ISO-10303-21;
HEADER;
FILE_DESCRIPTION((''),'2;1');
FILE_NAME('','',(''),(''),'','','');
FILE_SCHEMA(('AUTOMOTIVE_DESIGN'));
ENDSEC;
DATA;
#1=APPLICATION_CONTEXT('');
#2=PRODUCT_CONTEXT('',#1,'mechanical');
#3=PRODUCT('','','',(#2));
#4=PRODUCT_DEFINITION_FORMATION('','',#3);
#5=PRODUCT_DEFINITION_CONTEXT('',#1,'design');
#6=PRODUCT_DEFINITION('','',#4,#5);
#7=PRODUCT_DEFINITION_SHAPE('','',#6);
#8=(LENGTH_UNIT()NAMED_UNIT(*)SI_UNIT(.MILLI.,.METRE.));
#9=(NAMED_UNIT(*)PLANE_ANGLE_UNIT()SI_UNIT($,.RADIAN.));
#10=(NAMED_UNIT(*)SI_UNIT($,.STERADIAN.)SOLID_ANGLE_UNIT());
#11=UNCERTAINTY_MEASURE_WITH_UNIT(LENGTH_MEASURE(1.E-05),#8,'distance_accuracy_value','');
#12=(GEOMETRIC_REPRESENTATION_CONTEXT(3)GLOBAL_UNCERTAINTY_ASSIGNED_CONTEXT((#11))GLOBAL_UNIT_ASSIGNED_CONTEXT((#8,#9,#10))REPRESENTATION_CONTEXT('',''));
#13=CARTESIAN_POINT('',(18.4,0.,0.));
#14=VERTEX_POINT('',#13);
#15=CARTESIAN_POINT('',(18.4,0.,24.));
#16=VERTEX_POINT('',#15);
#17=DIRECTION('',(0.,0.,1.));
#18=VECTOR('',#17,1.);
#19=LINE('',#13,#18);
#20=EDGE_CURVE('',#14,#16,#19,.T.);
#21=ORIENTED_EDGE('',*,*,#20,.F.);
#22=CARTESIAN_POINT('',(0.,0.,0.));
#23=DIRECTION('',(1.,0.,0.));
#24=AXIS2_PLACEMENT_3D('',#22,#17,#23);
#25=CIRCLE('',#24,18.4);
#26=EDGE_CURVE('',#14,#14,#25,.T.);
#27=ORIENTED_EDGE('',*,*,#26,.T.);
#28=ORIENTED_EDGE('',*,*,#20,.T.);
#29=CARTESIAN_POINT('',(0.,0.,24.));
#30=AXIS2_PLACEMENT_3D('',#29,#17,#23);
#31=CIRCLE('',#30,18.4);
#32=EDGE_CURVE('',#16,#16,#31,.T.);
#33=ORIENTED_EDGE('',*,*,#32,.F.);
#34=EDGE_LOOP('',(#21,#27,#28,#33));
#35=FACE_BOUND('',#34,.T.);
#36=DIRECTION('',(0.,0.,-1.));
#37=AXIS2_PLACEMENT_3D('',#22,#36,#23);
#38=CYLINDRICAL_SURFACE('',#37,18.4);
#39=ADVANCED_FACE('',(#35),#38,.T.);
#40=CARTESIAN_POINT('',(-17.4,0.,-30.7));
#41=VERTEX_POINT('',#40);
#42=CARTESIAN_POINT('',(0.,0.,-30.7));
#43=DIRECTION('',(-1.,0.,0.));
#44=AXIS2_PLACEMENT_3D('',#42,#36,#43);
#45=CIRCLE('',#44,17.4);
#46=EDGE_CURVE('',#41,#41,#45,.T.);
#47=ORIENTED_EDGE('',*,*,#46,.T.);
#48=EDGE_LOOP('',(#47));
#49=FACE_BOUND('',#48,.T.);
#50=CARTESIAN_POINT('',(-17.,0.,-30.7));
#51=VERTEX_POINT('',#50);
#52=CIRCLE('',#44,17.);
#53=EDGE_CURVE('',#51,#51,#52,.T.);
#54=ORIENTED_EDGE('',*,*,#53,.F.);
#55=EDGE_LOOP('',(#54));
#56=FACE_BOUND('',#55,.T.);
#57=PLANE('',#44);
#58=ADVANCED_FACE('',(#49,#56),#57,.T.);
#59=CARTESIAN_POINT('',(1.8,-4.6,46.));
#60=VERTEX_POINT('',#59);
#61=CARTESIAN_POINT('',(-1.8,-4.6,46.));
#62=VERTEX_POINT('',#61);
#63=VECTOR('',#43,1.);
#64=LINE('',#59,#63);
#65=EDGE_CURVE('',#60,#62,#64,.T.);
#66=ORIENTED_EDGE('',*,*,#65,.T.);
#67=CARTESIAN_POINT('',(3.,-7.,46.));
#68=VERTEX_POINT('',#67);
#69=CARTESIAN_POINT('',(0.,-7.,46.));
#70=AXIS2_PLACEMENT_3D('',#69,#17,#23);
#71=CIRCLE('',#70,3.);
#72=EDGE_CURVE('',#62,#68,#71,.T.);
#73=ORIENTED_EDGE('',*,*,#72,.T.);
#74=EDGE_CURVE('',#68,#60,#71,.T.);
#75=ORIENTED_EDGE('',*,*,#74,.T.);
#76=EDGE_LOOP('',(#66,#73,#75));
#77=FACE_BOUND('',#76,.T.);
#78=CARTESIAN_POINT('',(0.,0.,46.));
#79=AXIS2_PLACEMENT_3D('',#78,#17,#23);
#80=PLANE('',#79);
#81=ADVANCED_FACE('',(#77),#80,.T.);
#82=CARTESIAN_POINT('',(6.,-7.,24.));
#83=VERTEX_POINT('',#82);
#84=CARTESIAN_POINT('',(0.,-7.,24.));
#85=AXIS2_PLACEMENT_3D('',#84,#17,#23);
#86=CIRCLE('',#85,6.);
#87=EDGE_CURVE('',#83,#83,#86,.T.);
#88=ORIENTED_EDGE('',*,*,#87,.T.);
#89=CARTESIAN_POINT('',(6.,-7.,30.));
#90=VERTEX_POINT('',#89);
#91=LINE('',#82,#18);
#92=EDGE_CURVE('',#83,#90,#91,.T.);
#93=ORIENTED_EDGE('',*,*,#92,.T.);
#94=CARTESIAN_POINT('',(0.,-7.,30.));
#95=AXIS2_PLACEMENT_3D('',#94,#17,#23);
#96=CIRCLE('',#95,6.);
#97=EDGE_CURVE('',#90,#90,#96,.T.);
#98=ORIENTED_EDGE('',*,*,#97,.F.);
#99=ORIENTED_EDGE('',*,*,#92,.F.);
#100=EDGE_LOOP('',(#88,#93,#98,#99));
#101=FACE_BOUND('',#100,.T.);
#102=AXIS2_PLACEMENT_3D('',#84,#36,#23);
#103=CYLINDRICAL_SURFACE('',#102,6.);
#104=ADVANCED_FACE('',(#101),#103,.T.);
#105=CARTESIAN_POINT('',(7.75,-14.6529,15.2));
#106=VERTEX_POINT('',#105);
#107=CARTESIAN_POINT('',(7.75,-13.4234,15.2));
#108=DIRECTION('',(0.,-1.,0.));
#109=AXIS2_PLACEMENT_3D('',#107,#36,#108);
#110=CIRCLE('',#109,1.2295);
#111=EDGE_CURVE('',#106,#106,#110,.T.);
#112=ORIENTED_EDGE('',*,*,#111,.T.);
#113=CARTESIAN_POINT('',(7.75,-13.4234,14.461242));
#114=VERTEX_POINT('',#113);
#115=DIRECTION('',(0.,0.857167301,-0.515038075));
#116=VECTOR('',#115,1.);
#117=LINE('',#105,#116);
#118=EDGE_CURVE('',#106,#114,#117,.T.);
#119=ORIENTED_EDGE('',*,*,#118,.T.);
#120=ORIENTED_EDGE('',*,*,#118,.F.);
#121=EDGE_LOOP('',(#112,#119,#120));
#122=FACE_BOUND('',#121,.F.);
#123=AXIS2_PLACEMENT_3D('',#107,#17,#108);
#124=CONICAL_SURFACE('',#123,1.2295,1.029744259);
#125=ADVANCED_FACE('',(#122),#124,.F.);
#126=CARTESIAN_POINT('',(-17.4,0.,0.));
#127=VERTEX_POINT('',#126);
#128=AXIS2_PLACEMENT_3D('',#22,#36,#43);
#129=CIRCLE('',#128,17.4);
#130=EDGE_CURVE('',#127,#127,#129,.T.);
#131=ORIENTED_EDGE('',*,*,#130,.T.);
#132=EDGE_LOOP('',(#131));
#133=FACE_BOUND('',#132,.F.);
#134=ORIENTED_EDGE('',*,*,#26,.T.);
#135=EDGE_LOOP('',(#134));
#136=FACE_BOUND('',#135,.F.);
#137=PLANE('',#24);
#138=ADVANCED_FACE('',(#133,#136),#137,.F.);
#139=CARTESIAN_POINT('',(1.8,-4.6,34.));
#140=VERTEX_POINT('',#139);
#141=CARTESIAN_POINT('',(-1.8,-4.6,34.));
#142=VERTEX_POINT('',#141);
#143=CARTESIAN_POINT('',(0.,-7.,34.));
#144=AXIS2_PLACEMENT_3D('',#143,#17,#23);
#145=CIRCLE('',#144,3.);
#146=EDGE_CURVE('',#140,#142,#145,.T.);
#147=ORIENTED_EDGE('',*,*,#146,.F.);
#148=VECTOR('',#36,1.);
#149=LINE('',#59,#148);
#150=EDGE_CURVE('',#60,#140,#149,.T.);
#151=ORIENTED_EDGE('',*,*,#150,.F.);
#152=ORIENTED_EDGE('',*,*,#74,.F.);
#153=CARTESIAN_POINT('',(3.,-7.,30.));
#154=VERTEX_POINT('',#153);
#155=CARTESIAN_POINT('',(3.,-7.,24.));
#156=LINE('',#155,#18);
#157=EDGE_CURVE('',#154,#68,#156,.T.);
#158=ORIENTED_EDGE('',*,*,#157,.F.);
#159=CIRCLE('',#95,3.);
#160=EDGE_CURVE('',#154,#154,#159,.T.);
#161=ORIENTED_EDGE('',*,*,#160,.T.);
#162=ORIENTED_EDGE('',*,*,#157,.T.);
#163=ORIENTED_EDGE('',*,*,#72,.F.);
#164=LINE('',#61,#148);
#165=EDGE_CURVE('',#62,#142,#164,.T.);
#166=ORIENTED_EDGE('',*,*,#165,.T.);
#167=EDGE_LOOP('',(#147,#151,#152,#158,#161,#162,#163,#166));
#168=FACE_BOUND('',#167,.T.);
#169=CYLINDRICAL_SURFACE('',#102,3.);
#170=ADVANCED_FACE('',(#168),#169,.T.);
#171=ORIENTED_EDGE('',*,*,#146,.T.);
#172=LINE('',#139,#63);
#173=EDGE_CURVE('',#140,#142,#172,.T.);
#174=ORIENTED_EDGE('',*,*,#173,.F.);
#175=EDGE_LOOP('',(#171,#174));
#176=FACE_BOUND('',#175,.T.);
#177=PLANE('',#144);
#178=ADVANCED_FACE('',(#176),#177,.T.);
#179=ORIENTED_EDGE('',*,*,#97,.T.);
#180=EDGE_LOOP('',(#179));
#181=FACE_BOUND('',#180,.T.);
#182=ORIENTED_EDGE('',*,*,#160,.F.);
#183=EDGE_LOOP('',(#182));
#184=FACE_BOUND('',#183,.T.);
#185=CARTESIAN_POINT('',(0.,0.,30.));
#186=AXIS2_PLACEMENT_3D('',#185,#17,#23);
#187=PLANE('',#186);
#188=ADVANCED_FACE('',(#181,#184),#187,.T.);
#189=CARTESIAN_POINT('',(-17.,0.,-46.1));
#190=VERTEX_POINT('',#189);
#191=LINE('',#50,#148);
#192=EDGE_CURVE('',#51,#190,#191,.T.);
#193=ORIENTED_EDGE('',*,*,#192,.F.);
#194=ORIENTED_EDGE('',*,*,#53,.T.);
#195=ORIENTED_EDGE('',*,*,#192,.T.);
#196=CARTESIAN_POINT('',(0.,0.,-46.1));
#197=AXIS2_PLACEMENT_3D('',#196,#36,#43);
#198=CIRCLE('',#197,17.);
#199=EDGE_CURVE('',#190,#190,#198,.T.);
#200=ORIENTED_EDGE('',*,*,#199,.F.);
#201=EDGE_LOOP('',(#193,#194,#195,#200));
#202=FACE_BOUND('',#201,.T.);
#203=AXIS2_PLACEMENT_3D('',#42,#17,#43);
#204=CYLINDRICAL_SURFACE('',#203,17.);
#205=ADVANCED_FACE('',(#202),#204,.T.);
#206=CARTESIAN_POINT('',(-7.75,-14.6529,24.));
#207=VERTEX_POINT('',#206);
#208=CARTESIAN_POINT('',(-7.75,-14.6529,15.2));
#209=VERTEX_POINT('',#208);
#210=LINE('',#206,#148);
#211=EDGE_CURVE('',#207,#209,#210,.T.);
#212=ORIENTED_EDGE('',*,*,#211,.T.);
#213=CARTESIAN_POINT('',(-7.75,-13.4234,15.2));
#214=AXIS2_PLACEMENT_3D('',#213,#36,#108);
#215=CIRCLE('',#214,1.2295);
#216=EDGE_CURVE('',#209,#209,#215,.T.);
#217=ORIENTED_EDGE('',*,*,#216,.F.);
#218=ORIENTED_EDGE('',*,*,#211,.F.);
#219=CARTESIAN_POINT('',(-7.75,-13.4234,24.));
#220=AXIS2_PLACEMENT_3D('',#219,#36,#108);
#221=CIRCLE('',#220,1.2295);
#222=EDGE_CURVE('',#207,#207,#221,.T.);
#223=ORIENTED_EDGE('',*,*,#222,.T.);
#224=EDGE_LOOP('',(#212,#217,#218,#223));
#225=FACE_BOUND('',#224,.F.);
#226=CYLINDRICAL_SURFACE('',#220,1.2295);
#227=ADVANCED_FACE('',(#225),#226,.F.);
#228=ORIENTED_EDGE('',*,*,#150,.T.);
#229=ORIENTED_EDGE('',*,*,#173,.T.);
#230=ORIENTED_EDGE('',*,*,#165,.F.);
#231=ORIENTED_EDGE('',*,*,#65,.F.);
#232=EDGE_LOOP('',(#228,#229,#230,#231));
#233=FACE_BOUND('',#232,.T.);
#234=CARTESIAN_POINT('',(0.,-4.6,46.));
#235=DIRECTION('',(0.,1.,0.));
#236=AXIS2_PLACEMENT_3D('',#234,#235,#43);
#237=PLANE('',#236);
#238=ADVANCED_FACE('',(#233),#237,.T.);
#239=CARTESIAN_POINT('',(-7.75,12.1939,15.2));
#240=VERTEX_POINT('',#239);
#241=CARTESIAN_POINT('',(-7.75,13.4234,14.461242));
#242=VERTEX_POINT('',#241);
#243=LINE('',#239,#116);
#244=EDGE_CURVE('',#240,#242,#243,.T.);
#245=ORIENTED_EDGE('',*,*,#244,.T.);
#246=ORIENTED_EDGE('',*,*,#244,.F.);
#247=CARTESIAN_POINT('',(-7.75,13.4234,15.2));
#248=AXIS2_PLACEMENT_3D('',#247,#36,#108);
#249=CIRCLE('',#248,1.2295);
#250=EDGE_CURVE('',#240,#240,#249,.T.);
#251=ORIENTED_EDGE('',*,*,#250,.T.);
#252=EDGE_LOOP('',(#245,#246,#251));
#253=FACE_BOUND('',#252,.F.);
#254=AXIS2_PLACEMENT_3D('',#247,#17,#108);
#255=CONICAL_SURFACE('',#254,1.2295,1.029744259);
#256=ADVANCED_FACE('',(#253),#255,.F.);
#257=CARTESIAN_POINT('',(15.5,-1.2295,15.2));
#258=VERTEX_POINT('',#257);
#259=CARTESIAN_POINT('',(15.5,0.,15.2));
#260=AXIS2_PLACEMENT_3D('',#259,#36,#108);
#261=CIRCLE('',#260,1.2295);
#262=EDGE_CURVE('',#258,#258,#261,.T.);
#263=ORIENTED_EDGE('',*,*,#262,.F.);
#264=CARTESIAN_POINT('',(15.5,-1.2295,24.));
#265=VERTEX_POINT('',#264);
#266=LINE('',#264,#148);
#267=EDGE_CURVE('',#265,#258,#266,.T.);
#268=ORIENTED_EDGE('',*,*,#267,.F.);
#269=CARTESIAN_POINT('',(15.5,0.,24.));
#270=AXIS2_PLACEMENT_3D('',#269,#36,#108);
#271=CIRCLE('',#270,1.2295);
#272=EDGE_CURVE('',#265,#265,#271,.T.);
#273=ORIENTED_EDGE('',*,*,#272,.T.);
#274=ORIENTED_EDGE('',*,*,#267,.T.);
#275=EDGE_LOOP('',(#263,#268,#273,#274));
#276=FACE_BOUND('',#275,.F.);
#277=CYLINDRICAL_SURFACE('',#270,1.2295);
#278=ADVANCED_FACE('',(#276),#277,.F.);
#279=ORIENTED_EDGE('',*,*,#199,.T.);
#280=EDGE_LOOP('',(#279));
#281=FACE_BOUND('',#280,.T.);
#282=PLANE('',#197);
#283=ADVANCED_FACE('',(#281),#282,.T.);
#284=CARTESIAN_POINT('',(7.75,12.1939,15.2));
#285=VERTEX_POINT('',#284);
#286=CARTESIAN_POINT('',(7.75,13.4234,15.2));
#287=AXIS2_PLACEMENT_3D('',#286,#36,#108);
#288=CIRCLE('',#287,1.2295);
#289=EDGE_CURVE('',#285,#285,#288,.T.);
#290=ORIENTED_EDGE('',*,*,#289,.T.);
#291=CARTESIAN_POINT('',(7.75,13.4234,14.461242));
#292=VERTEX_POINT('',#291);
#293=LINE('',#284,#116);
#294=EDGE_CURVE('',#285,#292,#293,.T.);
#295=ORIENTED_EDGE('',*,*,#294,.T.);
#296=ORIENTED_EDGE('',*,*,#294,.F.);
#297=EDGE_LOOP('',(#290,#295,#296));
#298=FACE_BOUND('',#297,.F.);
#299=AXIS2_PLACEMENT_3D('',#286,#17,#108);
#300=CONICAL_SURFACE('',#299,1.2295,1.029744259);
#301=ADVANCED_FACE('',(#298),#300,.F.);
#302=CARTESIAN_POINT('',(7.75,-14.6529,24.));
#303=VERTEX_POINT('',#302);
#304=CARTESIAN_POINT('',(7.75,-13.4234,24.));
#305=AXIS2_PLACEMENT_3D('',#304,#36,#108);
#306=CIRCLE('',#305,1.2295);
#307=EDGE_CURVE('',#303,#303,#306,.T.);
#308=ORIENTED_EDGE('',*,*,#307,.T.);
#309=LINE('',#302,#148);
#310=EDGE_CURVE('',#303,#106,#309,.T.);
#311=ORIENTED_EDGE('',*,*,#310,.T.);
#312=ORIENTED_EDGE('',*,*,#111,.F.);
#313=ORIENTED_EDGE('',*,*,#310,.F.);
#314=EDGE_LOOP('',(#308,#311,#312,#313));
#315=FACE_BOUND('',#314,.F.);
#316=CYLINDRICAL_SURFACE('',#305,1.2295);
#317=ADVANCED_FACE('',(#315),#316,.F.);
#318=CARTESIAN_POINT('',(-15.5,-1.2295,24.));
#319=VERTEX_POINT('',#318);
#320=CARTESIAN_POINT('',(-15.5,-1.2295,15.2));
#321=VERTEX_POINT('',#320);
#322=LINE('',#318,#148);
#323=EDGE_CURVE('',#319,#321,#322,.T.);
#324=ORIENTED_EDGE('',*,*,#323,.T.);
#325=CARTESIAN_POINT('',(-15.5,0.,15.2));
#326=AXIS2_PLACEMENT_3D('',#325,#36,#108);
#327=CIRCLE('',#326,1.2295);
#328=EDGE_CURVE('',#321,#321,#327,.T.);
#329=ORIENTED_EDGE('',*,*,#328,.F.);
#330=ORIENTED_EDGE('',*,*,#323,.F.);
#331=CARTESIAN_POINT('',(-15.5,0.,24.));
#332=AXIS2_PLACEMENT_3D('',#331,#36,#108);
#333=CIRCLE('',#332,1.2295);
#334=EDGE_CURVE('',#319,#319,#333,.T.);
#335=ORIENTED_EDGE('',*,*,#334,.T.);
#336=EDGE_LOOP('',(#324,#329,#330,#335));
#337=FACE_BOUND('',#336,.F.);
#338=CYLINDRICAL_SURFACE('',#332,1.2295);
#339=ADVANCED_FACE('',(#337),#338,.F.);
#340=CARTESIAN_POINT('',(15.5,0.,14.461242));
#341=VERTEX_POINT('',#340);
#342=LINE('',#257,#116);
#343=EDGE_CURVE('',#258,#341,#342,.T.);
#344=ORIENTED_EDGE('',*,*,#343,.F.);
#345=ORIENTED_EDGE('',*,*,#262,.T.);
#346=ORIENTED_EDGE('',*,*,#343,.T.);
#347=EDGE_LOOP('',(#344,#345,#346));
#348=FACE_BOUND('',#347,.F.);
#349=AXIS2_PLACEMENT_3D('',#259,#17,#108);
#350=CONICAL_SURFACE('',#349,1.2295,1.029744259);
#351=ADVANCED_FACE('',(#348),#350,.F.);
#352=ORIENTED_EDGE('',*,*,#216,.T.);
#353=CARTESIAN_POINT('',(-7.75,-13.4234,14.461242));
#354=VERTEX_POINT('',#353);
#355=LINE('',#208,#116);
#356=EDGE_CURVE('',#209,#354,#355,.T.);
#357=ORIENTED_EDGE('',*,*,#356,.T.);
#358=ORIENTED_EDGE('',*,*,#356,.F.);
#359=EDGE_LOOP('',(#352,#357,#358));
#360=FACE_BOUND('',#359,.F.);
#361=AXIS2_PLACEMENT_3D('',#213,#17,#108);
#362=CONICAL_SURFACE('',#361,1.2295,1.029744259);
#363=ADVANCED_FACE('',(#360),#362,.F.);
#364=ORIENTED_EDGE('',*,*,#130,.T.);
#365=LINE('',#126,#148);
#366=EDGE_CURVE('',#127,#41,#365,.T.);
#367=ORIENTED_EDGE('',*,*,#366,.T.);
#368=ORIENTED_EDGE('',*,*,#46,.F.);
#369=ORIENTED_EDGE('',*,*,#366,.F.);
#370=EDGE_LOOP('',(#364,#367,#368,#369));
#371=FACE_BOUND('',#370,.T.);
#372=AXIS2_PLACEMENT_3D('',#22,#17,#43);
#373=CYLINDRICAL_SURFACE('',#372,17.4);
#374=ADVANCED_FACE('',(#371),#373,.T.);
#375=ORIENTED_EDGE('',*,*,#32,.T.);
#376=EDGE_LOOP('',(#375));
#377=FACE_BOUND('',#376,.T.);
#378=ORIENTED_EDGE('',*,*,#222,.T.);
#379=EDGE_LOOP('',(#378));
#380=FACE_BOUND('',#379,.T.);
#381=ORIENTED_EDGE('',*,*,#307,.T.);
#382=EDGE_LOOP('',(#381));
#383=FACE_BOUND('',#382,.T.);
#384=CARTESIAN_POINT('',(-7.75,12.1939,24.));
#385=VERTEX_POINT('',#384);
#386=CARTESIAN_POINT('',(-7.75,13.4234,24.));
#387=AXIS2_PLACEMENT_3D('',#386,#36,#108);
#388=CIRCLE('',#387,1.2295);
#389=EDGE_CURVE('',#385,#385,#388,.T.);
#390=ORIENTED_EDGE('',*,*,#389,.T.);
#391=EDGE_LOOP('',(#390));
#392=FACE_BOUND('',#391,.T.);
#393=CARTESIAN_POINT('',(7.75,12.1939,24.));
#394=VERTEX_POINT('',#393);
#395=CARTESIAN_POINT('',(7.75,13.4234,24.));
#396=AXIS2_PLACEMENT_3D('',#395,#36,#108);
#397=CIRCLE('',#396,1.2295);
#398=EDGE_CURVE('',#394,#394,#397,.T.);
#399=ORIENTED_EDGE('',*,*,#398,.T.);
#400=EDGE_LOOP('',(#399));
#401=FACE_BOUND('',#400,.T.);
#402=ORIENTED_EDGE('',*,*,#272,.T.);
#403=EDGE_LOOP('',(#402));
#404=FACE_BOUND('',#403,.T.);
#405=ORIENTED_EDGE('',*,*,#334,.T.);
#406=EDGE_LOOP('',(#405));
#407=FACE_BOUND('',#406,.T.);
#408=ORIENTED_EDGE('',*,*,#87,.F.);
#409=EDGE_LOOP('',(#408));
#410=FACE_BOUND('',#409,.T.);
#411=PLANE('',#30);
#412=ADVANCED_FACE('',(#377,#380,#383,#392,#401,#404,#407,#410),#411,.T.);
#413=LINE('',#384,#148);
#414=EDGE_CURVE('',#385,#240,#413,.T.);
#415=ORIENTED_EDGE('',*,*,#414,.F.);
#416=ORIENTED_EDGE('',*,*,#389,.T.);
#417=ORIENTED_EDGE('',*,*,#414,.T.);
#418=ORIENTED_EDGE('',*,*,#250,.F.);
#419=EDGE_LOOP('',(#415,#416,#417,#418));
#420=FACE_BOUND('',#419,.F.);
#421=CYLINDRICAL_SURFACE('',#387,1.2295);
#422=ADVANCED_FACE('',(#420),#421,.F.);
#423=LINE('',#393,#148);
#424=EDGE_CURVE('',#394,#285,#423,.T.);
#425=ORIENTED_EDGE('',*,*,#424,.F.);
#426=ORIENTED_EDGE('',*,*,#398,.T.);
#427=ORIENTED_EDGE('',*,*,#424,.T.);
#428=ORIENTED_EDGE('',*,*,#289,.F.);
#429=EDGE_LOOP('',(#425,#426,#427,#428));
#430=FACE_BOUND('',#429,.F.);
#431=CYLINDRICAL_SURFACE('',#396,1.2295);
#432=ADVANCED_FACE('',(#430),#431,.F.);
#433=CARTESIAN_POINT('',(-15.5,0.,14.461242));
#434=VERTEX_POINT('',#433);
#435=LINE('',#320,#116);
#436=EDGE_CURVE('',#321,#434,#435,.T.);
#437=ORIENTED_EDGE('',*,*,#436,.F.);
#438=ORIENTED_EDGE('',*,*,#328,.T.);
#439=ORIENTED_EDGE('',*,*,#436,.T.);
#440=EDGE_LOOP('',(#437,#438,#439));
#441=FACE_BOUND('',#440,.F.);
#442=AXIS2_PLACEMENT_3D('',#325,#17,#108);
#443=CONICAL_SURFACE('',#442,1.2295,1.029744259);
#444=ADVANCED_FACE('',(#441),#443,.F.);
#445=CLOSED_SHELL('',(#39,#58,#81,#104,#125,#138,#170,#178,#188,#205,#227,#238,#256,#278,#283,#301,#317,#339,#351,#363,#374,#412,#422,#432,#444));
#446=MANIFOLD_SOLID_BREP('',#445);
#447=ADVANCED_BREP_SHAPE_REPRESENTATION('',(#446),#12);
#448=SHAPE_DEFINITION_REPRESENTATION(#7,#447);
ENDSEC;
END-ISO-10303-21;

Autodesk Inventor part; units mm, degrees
ref_plane "YZ Plane" through (0, 0, 0) normal (1, 0, 0) x (0, 1, 0)
ref_plane "XZ Plane" through (0, 0, 0) normal (0, 1, 0) x (-1, 0, 0)
ref_plane "XY Plane" through (0, 0, 0) normal (0, 0, 1) x (1, 0, 0)
sketch "スケッチ1" plane through (0, 0, 0) normal (0, 0, 1) x (1, 0, 0)
  circle A0 centre (0, 0) radius 18.4
extrude "押し出し1" add sketch "スケッチ1" along normal blind 24
sketch "スケッチ2" plane through (0, 0, 0) normal (0, 0, -1) x (-1, 0, 0)
  circle A0 centre (0, 0) radius 17.4
  dimension "d3" = 34.8
extrude "押し出し2" add sketch "スケッチ2" along normal blind 30.7
sketch "スケッチ3" plane through (0, 0, -30.7) normal (0, 0, -1) x (-1, 0, 0)
  circle A0 centre (0, 0) radius 17
  dimension "d6" = 34
extrude "押し出し3" add sketch "スケッチ3" along normal blind 15.4
sketch "スケッチ4" plane through (0, 0, 24) normal (0, 0, 1) x (1, 0, 0)
  circle A0 centre (0, -7) radius 6
  circle A1 centre (0, -7) radius 3
  point P0 (0, 0)
  point P1 (-15.5, 0)
  point P2 (0, 0)
  point P3 (-7.75, -13.4234)
  point P4 (7.75, -13.4234)
  point P5 (15.5, 0)
  point P6 (7.75, 13.4234)
  point P7 (-7.75, 13.4234)
  dimension "d11" = 360
  dimension "d13" = 15.5
  dimension "d14" = 7
  dimension "d15" = 12
  dimension "d16" = 6
extrude "押し出し4" add sketch "スケッチ4" along normal blind 6
extrude "押し出し5" add sketch "スケッチ4" along normal blind 22 contours A1
sketch "スケッチ5" plane through (0, -7, 46) normal (0, 0, 1) x (1, 0, 0)
  circle A0 centre (0, 0) radius 3
  line L0 (0, 2.4) -> (1.8, 2.4)
  line L1 (0, 2.4) -> (-1.8, 2.4)
  point P0 (0, 7)
  dimension "d21" = 6
  dimension "d22" = 2.4
extrude "押し出し6" cut sketch "スケッチ5" against normal blind 12 contours L0 L1 A0 picked at (-1.016, 2.5094)
sketch "スケッチ6" plane through (0, 0, 24) normal (0, 0, 1) x (1, 0, 0)
  point P0 (0, 0)
  point P1 (-15.5, 0)
  point P2 (-7.75, -13.4234)
  point P3 (7.75, -13.4234)
  point P4 (15.5, 0)
  point P5 (7.75, 13.4234)
  point P6 (-7.75, 13.4234)
  dimension "d25" = 15.5
  dimension "d28" = 360
hole "穴1" at (7.75, 13.4234, 24) at (-7.75, 13.4234, 24) at (-15.5, 0, 24) at (-7.75, -13.4234, 24) at (7.75, -13.4234, 24) at (15.5, 0, 24) direction (0, 0, -1) diameter 2.459 depth 8.8 tip angle 118 thread size "M3x0.5" class "6H" standard "ISO Metric profile"
properties part number "Metal Gearmotor"
